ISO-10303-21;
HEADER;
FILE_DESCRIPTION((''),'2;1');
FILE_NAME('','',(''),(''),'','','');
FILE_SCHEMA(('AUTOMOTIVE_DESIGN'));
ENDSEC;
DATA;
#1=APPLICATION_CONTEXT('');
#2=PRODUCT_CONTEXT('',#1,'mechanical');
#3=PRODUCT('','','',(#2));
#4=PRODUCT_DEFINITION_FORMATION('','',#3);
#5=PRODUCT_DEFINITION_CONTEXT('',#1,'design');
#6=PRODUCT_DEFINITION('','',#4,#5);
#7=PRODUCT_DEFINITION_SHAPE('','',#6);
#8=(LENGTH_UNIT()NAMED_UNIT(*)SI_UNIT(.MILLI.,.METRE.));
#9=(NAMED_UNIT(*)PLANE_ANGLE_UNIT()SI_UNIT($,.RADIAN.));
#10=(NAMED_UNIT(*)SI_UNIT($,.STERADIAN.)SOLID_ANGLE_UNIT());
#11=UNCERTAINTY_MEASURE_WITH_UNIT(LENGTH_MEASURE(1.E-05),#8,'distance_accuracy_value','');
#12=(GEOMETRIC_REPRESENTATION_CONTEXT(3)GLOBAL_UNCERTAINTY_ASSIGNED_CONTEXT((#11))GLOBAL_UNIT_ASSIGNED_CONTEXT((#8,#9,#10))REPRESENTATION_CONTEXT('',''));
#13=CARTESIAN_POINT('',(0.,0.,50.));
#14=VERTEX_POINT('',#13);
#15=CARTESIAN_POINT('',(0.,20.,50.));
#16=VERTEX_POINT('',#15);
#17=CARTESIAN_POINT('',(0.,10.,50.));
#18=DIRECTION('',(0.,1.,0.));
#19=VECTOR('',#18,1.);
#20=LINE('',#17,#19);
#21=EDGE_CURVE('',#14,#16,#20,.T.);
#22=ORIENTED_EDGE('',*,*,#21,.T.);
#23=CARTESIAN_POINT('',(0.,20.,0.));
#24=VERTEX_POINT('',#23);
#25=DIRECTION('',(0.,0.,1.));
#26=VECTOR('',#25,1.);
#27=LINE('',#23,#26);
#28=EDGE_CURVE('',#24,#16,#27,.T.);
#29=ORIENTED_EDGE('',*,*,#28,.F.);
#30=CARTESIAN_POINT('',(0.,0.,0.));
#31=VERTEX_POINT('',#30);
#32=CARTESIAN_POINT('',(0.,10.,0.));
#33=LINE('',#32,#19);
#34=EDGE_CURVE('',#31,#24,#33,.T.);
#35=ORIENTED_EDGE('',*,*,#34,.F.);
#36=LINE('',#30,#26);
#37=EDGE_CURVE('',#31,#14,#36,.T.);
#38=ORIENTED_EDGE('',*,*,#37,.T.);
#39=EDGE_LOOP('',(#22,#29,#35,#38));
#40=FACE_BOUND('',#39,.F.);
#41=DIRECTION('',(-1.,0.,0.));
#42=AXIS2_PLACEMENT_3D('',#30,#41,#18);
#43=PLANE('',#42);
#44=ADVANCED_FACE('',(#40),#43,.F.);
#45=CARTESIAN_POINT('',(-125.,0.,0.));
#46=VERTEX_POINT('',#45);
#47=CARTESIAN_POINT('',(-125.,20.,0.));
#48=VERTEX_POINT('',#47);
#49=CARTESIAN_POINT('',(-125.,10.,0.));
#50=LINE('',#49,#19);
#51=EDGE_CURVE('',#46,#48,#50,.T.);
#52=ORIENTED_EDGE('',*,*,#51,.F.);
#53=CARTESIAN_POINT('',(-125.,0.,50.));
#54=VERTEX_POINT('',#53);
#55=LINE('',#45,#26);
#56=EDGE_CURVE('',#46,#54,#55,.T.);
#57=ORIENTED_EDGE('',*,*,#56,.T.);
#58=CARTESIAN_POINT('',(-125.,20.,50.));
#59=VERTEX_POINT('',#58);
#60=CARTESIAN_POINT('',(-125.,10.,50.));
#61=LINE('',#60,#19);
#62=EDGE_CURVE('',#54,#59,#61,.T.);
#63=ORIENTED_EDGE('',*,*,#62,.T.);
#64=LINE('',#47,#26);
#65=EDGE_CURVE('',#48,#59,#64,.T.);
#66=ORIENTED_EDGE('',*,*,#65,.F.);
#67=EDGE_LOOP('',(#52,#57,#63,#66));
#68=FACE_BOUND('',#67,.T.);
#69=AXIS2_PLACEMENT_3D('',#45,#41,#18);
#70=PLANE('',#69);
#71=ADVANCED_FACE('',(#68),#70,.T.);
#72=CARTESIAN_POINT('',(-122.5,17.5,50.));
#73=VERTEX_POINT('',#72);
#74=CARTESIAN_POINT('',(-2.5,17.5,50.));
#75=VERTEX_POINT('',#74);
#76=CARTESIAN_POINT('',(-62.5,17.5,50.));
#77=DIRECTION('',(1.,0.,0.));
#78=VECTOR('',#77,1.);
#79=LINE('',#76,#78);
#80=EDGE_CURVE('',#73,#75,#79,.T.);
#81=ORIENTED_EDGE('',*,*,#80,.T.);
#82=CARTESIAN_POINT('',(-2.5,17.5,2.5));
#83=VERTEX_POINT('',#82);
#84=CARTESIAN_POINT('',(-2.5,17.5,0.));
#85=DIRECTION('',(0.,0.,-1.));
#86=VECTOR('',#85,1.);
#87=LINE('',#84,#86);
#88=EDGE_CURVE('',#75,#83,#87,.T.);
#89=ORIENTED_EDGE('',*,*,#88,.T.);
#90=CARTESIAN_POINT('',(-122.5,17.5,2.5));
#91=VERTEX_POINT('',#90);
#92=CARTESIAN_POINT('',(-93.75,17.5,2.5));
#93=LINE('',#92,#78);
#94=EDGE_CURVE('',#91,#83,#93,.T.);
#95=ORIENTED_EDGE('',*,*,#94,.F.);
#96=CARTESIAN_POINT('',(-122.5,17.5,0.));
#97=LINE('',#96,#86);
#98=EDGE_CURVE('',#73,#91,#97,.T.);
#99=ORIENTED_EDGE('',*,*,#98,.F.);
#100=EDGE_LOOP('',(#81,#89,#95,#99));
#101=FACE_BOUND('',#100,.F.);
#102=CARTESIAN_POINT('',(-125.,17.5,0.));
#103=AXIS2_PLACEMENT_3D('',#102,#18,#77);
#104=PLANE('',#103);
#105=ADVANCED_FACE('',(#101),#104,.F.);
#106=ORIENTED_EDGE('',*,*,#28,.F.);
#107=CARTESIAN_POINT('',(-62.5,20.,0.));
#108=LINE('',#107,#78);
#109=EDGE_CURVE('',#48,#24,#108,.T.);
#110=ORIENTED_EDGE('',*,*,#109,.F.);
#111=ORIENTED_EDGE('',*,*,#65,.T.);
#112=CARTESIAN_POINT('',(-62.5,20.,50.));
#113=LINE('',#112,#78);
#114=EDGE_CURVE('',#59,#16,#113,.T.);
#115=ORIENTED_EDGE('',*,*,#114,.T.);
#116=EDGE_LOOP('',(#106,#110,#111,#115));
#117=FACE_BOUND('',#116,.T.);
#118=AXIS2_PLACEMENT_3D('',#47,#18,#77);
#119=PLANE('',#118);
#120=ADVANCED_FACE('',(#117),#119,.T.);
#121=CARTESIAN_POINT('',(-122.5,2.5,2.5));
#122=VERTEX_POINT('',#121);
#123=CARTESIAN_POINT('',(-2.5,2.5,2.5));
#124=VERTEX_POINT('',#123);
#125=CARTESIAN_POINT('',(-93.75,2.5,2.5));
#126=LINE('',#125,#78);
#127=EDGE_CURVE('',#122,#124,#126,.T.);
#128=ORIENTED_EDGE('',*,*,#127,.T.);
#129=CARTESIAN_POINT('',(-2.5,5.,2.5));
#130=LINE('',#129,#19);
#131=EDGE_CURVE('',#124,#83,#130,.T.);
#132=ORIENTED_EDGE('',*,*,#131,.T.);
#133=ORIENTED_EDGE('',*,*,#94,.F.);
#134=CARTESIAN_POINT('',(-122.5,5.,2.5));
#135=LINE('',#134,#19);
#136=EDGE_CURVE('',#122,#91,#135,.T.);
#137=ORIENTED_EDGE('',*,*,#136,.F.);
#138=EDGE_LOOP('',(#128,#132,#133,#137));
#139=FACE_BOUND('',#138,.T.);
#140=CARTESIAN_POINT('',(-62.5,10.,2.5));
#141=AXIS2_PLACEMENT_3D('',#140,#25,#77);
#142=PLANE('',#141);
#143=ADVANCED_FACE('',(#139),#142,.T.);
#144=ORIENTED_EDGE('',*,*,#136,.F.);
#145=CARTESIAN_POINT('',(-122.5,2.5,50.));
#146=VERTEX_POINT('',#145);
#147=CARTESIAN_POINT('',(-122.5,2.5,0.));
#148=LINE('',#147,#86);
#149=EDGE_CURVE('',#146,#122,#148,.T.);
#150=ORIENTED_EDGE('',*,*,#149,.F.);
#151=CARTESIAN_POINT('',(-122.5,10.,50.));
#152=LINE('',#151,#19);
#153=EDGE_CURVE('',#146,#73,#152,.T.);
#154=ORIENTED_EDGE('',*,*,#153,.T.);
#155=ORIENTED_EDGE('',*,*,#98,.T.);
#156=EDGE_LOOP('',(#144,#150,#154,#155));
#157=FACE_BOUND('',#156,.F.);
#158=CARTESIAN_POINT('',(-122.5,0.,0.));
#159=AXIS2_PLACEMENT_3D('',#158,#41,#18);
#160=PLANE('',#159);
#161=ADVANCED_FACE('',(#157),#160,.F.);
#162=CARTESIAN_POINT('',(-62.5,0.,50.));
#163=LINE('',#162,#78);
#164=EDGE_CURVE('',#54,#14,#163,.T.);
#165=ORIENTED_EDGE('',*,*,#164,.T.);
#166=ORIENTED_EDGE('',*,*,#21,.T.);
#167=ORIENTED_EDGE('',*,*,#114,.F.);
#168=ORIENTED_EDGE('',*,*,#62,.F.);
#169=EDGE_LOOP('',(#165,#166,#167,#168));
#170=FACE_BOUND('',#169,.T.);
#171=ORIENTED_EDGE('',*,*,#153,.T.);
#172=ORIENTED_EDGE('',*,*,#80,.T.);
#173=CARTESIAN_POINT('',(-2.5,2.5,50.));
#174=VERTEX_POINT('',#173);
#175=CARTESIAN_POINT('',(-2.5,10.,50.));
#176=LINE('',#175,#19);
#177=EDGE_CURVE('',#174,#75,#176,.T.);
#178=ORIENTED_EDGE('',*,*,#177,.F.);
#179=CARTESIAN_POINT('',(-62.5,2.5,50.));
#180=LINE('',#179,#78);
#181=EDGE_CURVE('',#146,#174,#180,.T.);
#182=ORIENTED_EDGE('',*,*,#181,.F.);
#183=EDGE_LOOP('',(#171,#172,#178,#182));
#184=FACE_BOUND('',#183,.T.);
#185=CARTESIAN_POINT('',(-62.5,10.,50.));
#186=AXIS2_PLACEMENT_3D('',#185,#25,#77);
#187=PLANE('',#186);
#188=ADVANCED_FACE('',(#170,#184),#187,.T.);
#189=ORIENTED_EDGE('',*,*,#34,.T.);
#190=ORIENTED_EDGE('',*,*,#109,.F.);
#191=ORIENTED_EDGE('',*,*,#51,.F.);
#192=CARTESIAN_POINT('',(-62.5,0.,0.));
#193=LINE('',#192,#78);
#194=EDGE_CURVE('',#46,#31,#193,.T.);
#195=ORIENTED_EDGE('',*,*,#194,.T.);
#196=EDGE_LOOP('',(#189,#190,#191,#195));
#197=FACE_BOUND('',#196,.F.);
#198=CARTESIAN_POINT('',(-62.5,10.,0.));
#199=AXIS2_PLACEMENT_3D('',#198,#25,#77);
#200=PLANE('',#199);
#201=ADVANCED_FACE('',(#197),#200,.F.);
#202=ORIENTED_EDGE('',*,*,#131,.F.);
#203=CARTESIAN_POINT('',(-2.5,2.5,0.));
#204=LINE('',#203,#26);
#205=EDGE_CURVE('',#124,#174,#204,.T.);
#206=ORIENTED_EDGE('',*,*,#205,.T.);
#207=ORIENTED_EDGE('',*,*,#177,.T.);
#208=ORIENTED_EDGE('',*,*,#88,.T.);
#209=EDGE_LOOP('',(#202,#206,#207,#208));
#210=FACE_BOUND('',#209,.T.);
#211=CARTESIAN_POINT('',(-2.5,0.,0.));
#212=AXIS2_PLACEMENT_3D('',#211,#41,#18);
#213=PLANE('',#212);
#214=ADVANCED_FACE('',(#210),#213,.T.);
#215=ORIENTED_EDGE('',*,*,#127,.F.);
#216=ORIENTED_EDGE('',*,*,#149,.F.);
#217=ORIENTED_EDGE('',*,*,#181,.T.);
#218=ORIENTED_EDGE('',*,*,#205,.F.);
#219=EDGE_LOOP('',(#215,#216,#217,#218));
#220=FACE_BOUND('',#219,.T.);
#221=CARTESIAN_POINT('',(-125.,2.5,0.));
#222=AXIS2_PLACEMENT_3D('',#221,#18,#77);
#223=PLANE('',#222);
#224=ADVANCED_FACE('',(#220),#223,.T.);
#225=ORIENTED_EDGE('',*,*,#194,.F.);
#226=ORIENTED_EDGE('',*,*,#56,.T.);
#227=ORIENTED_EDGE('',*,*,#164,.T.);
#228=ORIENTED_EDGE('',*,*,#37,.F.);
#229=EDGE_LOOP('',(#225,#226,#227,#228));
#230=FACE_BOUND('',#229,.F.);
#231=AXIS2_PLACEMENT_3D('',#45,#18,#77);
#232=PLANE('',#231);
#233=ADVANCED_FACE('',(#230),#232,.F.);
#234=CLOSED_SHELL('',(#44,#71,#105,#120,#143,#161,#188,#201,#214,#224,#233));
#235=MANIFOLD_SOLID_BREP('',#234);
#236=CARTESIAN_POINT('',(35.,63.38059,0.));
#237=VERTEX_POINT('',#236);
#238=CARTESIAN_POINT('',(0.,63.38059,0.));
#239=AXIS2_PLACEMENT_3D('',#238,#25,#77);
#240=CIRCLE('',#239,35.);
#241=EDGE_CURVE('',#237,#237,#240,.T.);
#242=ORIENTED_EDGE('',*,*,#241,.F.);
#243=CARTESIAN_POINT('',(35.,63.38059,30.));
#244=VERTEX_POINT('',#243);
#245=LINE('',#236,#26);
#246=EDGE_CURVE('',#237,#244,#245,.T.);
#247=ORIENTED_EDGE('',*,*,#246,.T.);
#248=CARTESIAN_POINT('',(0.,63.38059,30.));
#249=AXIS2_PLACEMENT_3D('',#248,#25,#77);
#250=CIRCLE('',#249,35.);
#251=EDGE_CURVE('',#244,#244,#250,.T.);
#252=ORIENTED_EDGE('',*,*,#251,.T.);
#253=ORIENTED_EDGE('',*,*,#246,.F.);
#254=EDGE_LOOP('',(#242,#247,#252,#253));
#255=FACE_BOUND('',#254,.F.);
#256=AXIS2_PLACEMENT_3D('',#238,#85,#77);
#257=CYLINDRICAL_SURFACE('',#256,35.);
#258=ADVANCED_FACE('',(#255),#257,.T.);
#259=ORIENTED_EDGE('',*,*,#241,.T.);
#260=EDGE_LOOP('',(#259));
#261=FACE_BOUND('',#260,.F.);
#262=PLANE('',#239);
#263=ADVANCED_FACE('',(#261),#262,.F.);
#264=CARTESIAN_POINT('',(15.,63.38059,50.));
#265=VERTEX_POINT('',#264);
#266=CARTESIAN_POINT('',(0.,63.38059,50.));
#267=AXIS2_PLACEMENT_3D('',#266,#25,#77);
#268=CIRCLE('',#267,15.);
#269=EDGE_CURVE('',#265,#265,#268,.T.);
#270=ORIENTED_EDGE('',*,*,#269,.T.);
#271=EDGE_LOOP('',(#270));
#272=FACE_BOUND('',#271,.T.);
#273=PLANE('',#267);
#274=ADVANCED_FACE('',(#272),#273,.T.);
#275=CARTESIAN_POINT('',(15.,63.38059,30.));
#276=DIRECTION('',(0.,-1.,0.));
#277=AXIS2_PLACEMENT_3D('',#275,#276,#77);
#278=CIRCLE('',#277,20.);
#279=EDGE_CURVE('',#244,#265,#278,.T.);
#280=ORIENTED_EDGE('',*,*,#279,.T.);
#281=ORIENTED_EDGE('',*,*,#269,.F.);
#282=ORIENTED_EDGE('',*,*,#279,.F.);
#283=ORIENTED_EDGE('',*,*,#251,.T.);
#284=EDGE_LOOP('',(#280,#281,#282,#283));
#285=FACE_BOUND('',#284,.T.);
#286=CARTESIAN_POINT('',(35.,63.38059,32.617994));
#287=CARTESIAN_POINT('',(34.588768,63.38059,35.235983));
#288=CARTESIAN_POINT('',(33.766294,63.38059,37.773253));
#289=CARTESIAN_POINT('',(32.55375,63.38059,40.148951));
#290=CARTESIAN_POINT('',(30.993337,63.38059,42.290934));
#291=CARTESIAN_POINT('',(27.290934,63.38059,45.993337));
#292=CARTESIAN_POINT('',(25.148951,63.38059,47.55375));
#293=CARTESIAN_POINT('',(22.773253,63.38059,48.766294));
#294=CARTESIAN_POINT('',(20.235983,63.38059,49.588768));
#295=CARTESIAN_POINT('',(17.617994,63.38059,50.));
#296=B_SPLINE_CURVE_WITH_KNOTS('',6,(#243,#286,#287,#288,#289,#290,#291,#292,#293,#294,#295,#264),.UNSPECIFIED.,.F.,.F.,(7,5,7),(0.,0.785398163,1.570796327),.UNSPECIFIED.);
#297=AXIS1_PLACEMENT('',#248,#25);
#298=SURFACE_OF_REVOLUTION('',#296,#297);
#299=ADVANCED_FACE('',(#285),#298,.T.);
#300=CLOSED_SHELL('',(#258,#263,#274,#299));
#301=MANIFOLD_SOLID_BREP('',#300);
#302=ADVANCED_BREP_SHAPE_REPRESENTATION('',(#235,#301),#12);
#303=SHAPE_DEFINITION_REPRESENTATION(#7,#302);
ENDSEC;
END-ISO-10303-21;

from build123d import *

# Parameters (mm, degrees)
F0_W     = 125
F0_H     = 20
F1_DEPTH = 50
F0_R     = 35
F2_R     = 20
F3_T     = -2.5


with BuildPart() as f1:
    # F0 (on Top) → F1 (new body)
    with BuildSketch(Plane.XY):
        with Locations((-62.5, 10)):
            Rectangle(F0_W, F0_H)
    extrude(amount=F1_DEPTH)

    # F3
    f3_openings = [f1.faces().sort_by_distance(p)[0] for p in [
        (-62.5, 10, 50),
    ]]
    offset(amount=F3_T, openings=f3_openings)


with BuildPart() as f1b:
    # F0 (on Top) → F1, piece 2 (new body)
    with BuildSketch(Plane.XY):
        with Locations((0, 63.3805897062)):
            Circle(F0_R)
    extrude(amount=F1_DEPTH)

    # F2
    f2_edges = [f1b.edges().sort_by_distance(p)[0] for p in [
        (-35, 63.38059, 50),
    ]]
    fillet(f2_edges, radius=F2_R)


solid = Compound([f1.part, f1b.part])
